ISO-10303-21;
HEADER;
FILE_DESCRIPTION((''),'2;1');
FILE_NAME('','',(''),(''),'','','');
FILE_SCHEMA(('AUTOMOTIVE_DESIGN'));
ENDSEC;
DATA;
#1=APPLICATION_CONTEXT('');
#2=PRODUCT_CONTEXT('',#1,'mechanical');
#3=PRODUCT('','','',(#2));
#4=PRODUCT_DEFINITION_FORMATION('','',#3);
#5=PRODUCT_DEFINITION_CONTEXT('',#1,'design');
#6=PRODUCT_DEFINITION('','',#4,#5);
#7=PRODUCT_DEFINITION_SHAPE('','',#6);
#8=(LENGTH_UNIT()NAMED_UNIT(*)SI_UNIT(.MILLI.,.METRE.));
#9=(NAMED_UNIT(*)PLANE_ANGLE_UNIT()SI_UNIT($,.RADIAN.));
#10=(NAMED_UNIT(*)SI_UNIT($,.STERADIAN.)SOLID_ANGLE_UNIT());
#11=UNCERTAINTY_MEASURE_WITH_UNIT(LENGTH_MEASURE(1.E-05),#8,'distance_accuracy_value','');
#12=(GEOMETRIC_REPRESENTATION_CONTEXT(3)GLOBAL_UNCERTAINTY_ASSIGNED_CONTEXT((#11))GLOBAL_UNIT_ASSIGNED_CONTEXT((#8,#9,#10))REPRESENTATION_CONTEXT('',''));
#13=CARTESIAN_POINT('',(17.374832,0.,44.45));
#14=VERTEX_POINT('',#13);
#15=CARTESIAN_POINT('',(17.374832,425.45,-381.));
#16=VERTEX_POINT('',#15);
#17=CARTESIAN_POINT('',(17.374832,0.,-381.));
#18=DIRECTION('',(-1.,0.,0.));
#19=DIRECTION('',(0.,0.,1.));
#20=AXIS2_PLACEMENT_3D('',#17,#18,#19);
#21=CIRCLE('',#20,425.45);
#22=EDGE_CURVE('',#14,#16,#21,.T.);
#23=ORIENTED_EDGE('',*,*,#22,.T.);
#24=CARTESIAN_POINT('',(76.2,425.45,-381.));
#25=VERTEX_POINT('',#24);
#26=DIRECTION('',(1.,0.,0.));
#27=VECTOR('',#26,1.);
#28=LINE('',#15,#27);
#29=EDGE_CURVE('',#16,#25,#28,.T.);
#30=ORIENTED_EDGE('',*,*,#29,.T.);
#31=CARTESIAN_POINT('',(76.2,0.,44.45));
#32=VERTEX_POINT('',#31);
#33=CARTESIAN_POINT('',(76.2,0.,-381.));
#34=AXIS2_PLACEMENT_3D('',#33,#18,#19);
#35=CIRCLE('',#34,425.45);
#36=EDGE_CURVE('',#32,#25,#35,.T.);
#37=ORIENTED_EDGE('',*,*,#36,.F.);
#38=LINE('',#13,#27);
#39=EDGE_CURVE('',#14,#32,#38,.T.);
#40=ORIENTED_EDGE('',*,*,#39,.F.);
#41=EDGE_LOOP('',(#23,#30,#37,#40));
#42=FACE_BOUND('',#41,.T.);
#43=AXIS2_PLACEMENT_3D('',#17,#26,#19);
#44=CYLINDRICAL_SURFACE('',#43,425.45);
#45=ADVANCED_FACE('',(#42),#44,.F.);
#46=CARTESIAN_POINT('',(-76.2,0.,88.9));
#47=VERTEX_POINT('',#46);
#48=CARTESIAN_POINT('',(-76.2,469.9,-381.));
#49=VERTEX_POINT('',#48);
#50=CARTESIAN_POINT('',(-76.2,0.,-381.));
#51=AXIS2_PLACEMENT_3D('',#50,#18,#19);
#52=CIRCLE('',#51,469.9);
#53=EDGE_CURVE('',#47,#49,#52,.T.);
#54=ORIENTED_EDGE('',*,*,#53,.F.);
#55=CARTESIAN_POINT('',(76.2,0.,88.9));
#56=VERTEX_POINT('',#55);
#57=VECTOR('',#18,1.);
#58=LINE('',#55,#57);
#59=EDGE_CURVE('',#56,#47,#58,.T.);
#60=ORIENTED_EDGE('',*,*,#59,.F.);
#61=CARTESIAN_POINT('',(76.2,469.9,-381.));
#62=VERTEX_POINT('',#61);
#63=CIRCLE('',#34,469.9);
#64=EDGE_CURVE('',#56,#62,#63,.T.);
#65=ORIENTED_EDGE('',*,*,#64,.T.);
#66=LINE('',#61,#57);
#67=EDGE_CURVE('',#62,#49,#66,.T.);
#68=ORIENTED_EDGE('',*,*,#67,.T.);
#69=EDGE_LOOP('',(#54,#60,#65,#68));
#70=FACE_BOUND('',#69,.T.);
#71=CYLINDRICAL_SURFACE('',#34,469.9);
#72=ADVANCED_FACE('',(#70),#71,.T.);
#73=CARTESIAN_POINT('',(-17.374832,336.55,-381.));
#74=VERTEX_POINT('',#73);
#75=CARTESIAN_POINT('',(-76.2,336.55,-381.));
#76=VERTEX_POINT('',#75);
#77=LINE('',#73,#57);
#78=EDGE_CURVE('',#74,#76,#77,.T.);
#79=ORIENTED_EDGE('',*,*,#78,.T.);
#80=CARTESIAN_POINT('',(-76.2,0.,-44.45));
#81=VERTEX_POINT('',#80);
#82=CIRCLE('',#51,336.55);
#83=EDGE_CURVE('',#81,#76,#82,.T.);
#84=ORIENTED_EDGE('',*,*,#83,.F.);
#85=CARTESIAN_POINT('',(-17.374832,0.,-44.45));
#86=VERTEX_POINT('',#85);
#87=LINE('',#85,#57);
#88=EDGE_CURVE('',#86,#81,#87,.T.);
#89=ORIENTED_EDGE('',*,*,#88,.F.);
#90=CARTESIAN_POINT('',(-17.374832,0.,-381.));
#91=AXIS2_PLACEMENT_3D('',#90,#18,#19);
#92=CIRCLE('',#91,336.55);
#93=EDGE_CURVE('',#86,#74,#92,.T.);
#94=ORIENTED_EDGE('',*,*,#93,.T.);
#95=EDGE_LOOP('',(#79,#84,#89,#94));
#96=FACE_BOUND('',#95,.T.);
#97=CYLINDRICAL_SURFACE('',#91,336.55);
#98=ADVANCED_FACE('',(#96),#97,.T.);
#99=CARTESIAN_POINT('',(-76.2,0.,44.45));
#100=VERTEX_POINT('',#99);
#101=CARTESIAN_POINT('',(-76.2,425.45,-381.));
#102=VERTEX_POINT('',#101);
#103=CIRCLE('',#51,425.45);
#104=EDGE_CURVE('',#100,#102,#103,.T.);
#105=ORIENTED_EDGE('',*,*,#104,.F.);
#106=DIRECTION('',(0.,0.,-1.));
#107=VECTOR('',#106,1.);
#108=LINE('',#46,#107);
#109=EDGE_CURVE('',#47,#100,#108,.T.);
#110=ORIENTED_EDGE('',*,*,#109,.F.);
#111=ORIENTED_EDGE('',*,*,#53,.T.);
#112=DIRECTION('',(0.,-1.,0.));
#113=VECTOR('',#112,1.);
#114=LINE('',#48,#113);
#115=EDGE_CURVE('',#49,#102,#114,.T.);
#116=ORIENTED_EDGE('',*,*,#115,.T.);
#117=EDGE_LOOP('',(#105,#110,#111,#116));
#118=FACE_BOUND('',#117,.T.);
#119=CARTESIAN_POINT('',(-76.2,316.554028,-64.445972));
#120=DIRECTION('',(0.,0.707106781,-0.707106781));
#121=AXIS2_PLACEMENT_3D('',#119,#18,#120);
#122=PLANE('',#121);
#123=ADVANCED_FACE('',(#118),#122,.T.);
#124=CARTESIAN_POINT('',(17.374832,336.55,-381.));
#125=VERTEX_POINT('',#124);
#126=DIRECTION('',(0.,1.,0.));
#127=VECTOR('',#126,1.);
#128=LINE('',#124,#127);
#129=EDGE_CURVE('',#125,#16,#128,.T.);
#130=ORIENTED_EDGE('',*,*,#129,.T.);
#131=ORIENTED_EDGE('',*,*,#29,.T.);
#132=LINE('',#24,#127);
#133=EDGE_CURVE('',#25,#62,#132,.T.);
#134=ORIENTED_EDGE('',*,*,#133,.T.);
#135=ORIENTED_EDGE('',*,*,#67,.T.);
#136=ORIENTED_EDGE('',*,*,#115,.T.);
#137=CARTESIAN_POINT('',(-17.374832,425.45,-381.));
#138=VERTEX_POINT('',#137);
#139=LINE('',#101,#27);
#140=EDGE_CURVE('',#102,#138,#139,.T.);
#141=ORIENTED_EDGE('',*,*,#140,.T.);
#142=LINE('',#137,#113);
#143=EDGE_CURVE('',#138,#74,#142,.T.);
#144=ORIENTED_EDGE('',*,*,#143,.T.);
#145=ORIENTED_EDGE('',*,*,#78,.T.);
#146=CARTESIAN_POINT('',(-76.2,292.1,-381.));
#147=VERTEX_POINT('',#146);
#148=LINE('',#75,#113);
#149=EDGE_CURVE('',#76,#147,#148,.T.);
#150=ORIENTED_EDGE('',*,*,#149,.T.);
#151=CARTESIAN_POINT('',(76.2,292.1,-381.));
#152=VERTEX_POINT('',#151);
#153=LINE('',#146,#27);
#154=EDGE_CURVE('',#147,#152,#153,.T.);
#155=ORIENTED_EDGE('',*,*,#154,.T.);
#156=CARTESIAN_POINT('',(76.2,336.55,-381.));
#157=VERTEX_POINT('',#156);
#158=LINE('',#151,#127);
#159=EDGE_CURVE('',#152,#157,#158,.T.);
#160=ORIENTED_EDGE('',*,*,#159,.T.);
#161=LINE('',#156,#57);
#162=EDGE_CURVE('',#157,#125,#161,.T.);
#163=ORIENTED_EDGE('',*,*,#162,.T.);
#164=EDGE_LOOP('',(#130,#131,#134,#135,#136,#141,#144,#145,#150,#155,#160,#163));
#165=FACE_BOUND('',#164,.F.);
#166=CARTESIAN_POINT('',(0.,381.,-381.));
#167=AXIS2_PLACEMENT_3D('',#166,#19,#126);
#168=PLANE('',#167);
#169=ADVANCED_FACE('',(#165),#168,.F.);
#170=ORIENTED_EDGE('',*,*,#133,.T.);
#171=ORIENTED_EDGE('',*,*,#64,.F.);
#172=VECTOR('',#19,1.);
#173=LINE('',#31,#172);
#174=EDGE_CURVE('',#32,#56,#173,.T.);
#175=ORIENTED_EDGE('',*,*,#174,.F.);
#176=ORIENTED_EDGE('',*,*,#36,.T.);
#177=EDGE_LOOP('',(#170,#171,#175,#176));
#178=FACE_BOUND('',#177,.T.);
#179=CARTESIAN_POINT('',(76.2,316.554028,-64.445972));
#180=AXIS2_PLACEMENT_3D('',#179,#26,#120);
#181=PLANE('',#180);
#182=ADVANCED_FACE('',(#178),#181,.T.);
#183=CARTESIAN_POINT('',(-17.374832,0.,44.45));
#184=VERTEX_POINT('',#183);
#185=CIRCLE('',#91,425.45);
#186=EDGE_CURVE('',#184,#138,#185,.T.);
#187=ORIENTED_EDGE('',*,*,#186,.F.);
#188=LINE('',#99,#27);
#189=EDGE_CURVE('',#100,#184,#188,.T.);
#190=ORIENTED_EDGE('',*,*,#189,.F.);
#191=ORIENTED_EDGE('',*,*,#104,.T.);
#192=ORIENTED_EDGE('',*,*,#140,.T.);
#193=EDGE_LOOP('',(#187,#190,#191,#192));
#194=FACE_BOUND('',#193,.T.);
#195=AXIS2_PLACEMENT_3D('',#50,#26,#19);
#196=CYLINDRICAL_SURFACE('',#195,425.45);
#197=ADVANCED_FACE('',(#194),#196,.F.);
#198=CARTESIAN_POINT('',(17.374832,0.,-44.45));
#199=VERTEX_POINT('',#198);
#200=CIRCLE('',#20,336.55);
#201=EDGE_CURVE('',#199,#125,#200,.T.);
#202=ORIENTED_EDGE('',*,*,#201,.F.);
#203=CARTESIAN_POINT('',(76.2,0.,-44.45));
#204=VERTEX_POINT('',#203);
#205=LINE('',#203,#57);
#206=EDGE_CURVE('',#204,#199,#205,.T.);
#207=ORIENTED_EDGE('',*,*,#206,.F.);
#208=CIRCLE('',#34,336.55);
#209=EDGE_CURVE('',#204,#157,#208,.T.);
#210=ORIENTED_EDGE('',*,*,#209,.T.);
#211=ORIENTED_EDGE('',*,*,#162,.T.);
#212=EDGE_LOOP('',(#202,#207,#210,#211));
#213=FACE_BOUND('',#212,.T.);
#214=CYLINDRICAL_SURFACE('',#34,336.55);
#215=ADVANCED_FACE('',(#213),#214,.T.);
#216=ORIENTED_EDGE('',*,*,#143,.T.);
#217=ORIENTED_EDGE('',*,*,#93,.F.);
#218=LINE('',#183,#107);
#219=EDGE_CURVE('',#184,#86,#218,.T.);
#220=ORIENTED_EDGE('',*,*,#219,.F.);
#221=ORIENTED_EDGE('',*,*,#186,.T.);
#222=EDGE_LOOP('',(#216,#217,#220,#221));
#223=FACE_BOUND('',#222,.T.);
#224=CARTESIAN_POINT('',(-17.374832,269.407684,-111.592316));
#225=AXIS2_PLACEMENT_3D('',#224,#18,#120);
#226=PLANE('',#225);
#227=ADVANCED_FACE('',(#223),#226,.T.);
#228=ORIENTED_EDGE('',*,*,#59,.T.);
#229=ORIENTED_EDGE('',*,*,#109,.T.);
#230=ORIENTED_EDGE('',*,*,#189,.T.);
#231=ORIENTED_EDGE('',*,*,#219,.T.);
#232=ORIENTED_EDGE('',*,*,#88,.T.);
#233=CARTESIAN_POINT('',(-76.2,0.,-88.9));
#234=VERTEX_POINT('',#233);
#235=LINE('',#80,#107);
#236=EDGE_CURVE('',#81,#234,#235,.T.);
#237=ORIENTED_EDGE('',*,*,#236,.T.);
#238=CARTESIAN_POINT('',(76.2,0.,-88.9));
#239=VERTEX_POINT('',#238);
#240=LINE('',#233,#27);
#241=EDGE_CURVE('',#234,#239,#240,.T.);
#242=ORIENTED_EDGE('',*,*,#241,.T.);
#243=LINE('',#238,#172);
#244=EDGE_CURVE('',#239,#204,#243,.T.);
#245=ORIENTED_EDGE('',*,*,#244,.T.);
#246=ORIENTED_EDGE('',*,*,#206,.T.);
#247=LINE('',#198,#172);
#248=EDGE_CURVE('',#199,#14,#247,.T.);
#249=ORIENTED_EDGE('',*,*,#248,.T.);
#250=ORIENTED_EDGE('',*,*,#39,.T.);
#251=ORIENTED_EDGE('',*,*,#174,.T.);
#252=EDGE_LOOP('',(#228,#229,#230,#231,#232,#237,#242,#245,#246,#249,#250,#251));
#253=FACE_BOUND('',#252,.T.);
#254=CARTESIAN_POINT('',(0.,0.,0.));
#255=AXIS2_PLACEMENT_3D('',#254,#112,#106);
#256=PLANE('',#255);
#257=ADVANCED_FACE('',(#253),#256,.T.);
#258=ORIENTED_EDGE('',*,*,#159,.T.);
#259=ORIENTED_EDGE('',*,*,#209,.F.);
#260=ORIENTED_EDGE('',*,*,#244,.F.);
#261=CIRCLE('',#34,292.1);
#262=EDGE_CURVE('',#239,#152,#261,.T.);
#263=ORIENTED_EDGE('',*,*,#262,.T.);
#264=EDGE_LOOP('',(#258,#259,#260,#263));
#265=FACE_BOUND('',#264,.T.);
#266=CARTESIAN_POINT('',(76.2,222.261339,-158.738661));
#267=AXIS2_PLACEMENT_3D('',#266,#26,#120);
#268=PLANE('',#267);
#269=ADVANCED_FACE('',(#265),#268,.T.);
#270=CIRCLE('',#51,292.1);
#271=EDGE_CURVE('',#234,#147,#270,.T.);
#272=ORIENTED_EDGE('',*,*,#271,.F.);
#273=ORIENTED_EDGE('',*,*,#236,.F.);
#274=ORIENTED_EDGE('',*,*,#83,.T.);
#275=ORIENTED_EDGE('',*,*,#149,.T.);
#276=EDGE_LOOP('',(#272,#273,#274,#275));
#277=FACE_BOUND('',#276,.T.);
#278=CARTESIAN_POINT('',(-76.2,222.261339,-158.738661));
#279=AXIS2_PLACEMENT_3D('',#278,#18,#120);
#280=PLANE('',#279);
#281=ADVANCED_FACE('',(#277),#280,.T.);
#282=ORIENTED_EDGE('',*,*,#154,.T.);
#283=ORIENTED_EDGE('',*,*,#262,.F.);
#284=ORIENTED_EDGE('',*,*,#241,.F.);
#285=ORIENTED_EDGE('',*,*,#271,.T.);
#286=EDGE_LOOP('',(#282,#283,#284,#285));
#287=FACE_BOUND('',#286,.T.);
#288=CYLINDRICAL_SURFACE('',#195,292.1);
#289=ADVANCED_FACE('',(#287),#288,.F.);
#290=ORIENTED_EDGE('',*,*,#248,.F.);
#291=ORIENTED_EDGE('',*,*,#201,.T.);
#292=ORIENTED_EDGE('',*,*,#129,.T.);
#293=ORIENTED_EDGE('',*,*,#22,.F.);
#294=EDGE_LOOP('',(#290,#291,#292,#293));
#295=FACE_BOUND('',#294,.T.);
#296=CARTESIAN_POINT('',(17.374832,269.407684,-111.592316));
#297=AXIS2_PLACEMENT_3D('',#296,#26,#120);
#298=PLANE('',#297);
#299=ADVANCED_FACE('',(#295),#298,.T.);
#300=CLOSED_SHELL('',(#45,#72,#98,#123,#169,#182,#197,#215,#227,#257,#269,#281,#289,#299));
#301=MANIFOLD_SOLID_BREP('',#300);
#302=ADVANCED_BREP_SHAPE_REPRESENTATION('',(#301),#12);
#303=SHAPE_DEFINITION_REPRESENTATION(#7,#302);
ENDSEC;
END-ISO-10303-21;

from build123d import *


# Not quite as in the source:
# - a feature of the source that left no trace in its solid (it failed there, or was rolled back) is left out


with BuildPart() as f2:
    # F2: sweep along a path in F1
    with BuildLine(Plane.YZ) as f2_path:
        ThreePointArc((0, 0), (269.4076836321, -111.5923163679), (381, -381))
    # F0 (on Front) → F2 (sweep)
    with BuildSketch(Plane.XZ):
        Polygon((76.2, 88.9), (0, 88.9), (-76.2, 88.9), (-76.2, 44.45), (-17.3748321831, 44.45), (-17.3748321831, 0), (-17.3748321831, -44.45), (-76.2, -44.45), (-76.2, -88.9), (0, -88.9), (76.2, -88.9), (76.2, -44.45), (17.3748321831, -44.45), (17.3748321831, 0), (17.3748321831, 44.45), (76.2, 44.45), align=None)
    sweep(path=f2_path.line)


solid = f2.part
